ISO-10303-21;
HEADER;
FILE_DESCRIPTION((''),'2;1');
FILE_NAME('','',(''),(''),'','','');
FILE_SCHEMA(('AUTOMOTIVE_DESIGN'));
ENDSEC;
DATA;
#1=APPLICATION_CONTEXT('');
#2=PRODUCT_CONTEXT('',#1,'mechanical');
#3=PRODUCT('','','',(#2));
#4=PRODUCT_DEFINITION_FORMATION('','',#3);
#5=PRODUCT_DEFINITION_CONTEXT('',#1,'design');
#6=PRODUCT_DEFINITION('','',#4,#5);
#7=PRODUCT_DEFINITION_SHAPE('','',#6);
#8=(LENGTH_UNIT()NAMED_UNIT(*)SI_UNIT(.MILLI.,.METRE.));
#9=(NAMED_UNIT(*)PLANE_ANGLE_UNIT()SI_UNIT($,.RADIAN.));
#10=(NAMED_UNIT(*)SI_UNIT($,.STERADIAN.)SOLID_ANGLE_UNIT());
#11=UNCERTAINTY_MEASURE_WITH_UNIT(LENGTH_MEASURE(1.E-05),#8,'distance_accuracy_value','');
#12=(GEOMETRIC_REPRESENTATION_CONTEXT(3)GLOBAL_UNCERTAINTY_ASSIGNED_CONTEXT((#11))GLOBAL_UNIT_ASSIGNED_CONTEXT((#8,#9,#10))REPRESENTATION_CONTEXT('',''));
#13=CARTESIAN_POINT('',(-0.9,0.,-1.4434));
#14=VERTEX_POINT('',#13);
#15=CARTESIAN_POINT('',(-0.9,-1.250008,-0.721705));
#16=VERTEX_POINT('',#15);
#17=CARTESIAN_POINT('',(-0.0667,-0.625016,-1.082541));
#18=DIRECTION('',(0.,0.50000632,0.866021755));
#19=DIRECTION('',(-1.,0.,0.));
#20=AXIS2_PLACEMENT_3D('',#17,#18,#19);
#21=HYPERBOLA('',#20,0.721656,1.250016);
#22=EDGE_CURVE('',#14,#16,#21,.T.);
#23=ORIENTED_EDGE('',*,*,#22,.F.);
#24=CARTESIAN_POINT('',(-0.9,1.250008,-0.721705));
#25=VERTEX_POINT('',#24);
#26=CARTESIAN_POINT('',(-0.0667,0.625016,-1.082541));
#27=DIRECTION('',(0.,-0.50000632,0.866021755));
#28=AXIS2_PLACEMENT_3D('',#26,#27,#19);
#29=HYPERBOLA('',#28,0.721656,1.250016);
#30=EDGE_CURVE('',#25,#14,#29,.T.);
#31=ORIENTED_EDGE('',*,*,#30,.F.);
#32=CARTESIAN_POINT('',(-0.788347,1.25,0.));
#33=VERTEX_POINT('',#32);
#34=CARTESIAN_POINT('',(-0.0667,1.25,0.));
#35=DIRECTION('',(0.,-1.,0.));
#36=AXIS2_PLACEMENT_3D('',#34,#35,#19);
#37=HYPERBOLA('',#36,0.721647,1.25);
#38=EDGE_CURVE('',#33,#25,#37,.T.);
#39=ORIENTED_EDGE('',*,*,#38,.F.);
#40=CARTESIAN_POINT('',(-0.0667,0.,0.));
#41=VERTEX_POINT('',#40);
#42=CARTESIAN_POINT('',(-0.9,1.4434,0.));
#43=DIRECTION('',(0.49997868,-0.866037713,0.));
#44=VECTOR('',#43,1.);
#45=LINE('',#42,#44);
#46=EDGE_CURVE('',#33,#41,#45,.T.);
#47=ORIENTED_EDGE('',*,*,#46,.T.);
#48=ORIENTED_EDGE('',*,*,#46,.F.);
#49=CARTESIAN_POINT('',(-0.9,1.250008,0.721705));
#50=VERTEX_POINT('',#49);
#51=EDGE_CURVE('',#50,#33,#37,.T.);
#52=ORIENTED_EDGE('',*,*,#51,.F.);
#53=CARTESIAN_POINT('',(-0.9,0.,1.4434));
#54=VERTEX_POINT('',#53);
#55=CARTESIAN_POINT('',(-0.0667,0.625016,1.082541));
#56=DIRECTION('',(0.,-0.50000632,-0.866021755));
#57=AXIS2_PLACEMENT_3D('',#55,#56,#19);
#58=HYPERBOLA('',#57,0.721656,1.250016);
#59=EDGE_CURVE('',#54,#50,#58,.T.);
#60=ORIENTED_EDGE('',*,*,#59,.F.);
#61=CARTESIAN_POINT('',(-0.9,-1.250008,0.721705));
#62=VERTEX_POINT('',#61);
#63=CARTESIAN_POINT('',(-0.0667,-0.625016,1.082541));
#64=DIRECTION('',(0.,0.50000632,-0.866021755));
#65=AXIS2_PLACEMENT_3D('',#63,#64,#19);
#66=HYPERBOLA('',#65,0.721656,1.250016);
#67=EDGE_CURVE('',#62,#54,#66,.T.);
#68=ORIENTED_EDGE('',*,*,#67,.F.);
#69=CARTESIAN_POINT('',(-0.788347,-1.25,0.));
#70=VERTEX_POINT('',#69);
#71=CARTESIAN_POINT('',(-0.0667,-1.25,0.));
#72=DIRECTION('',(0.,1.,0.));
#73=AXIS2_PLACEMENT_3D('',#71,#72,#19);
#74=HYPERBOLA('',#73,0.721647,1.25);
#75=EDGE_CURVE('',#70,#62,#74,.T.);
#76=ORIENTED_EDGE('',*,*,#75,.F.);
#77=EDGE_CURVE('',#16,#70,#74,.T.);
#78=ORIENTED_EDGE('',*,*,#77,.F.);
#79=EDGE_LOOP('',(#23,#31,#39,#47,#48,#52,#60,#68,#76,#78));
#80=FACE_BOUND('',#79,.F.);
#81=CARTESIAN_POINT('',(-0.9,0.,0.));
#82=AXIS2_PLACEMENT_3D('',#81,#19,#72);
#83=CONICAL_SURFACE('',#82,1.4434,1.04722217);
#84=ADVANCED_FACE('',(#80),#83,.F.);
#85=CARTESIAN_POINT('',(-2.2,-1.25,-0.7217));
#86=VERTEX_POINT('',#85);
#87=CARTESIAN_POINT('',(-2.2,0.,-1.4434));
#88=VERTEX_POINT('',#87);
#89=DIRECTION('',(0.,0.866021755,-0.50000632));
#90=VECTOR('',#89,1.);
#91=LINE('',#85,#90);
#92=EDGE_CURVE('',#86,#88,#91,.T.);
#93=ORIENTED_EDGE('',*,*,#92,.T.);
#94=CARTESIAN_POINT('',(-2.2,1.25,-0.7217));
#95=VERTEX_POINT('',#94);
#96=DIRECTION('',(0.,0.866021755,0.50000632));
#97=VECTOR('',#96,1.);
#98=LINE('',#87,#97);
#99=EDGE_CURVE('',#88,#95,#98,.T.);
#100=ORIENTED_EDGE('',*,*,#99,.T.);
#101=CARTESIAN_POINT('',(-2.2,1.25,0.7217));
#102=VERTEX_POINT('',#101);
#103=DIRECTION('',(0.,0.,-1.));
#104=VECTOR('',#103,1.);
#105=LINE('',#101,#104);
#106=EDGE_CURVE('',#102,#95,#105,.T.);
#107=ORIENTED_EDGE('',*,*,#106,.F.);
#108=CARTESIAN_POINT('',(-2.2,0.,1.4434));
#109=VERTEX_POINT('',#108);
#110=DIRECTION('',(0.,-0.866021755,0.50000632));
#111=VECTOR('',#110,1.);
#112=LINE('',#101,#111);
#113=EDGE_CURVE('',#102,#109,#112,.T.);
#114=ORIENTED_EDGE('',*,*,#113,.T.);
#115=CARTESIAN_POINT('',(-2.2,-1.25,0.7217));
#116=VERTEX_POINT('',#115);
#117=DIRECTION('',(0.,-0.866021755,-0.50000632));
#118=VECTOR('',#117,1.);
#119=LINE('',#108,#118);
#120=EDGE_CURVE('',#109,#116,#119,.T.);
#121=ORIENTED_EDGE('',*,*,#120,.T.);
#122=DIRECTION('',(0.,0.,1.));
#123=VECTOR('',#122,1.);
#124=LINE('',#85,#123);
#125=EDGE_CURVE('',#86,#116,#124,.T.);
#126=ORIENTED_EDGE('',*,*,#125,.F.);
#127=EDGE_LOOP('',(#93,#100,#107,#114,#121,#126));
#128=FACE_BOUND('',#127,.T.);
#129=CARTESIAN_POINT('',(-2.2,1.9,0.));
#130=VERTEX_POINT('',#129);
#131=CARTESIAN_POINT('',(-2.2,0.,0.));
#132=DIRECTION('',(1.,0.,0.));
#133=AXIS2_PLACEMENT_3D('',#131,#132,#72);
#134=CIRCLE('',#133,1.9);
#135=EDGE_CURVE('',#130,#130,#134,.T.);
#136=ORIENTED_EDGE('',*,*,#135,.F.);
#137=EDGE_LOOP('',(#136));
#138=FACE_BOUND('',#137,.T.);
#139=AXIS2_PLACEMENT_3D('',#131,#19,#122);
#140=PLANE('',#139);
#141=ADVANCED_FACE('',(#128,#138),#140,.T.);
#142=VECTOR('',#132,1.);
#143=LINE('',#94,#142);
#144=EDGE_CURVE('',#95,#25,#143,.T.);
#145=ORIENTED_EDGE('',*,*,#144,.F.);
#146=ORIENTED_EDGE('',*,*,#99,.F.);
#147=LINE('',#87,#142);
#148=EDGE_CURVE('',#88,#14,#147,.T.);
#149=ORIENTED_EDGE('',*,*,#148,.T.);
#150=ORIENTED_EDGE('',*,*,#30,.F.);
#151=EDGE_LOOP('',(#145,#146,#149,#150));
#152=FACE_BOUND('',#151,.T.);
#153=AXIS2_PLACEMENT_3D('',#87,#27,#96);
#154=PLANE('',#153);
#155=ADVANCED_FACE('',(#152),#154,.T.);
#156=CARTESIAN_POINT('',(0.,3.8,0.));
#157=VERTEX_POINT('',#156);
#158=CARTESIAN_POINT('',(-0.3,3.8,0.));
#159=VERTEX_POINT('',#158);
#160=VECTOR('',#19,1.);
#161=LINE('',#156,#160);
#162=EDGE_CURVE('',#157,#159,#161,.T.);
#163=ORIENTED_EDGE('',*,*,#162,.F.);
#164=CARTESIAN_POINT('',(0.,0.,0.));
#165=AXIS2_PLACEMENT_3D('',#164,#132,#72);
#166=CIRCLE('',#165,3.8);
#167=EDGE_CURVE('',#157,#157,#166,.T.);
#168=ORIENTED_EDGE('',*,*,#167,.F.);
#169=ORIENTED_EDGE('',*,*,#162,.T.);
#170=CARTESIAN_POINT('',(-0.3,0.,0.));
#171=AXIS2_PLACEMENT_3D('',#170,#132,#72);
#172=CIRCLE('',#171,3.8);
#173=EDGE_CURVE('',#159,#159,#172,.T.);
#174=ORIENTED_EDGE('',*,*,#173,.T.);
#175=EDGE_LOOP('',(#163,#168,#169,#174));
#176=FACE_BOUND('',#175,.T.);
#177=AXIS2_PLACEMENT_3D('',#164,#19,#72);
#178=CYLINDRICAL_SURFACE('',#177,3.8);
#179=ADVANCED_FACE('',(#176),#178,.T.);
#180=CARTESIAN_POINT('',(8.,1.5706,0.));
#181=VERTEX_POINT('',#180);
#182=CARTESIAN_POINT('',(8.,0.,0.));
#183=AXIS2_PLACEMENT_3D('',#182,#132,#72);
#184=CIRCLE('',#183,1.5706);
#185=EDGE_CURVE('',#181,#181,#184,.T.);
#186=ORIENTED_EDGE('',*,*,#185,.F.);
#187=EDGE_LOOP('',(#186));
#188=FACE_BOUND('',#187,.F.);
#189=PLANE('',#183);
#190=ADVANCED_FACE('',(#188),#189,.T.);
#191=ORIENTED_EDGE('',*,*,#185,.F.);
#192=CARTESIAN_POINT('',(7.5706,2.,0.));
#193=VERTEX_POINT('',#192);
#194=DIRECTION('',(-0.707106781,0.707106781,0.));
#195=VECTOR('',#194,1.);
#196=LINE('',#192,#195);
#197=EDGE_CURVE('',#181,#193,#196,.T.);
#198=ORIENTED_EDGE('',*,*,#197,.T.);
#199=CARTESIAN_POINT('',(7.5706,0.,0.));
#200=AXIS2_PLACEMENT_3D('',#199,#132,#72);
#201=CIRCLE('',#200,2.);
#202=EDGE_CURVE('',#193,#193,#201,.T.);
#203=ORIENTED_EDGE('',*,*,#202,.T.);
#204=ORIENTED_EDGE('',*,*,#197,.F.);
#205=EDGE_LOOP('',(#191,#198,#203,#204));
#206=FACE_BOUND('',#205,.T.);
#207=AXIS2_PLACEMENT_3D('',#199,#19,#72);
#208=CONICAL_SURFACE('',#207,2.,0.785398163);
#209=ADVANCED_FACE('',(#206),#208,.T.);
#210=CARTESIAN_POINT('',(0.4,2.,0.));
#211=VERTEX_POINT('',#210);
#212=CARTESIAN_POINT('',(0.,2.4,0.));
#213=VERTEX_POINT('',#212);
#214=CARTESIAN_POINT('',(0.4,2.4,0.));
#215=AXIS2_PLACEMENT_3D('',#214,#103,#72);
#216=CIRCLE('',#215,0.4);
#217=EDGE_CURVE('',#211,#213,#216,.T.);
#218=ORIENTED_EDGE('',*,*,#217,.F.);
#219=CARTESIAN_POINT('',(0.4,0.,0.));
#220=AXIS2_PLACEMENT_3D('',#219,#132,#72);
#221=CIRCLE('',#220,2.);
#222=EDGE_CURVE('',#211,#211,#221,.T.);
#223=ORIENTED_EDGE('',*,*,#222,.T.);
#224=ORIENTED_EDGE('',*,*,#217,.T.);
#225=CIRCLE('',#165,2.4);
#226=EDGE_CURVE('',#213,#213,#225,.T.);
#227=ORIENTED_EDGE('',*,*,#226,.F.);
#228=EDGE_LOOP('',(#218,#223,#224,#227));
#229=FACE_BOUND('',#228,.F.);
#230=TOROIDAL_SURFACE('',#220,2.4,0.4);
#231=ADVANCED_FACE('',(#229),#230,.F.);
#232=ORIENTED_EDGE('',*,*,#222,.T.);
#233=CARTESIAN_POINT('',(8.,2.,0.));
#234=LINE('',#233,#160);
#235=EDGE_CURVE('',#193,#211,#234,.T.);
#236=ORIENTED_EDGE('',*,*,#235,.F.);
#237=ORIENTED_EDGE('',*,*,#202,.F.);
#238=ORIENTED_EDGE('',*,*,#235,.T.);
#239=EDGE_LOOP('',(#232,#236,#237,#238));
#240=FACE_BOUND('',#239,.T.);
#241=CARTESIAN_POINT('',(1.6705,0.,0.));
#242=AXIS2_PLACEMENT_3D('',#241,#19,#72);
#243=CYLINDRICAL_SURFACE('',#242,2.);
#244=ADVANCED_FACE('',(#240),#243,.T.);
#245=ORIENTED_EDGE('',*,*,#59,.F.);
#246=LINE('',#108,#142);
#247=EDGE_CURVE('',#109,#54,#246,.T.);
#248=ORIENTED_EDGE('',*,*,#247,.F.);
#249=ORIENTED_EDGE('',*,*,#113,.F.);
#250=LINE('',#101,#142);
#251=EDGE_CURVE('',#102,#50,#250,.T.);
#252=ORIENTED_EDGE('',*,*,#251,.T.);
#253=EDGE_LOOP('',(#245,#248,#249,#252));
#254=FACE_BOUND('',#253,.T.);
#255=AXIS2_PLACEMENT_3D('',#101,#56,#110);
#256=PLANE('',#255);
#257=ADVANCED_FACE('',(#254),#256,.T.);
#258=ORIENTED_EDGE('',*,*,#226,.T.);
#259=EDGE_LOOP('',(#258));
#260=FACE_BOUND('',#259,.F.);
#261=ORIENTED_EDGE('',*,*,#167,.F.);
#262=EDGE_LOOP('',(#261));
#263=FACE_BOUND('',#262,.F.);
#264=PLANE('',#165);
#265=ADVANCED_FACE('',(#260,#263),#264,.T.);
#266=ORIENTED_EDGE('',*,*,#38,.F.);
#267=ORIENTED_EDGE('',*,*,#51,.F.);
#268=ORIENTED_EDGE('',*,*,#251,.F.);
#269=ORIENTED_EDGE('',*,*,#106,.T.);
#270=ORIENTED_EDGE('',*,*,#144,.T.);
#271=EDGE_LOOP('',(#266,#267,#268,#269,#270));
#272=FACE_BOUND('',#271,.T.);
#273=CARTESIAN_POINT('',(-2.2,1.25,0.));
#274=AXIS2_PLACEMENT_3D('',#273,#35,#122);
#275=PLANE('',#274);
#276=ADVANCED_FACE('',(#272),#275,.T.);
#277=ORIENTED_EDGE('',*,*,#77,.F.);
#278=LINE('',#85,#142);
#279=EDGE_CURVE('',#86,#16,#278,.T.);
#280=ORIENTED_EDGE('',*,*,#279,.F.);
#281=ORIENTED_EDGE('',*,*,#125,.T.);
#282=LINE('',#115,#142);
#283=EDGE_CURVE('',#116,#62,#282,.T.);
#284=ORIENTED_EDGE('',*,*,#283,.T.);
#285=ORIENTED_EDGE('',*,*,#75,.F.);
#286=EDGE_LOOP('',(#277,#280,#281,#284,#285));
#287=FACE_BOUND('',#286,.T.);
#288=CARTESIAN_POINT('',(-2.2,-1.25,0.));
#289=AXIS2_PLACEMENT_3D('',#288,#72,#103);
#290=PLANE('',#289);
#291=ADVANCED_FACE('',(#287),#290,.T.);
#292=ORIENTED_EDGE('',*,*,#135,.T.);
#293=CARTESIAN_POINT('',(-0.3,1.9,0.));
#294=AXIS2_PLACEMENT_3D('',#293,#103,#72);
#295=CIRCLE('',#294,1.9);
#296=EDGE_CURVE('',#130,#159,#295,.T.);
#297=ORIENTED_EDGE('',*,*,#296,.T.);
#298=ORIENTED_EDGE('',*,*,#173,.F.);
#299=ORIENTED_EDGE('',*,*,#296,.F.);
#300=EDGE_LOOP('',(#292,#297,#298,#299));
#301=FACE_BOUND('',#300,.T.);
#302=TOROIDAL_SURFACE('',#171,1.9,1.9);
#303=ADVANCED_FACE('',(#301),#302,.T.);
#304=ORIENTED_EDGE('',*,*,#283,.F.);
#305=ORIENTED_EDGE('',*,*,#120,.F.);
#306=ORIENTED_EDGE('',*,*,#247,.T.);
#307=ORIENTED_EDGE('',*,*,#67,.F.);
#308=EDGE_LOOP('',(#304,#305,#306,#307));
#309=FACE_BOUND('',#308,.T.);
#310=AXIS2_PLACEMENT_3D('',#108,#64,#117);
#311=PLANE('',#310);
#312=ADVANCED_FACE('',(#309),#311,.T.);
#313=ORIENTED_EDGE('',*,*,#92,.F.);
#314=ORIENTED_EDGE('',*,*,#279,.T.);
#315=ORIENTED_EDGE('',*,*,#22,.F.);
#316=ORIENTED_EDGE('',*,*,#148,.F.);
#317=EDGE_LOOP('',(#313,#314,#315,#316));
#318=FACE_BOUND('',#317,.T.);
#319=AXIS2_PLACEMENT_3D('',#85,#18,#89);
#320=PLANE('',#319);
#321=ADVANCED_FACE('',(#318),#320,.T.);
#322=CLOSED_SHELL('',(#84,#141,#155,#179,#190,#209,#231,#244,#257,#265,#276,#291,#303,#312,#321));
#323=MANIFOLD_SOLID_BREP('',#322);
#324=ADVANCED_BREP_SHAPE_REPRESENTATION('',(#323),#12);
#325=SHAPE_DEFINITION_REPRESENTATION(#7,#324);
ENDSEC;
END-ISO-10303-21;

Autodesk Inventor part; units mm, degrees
ref_plane "YZ Plane" through (0, 0, 0) normal (1, 0, 0) x (0, 1, 0)
ref_plane "XZ Plane" through (0, 0, 0) normal (0, 1, 0) x (-1, 0, 0)
sketch "Sketch1" plane through (0, 0, 0) normal (0, 0, 1) x (1, 0, 0)
  line L0 (-0.0667, 0) -> (8, 0)
  line L1 (8, 0) -> (8, 2)
  line L2 (8, 2) -> (2.1, 2)
  line L3 (2.1, 2) -> (1.6705, 2)
  line L4 (1.6705, 2) -> (0, 2)
  line L5 (0, 2) -> (0, 3.8)
  line L6 (0, 3.8) -> (-2.2, 3.8)
  line L7 (-2.2, 3.8) -> (-2.2, 1.4434)
  line L8 (-2.2, 1.4434) -> (-0.9, 1.4434)
  line L9 (-0.9, 1.4434) -> (-0.0667, 0)
  line L10 (-4.24, 0) -> (10.04, 0) projected
  line L11 (0, -0.76) -> (0, 4.56) projected
  line L12 (2.1, 2) -> (0, 2) construction
  dimension "d1" = 5.9
  dimension "d2" = 0.4295
  dimension "d3" = 2.2
  dimension "d4" = 1.3
  dimension "d5" = 60
  dimension "d6" = 4
  dimension "d7" = 4
  dimension "d8" = 2.8868
  dimension "d9" = 7.6
  dimension "d26" = 8
revolve "Body" add sketch "Sketch1" angle 360 about axis through (-0.0667, 0, 0) along (1, 0, 0)
sketch "Sketch2" plane through (-2.2, 0, 0) normal (-1, 0, 0) x (0, 0, 1)
  circle A0 centre (0, 0) radius 1.4434 projected
  line L0 (0, -5.32) -> (0, 5.32) projected
  line L1 (-5.32, 0) -> (5.32, 0) projected
  line L2 (1.4434, 0) -> (0.7217, -1.25)
  line L3 (0.7217, -1.25) -> (-0.7217, -1.25)
  line L4 (-0.7217, -1.25) -> (-1.4434, 0)
  line L5 (-1.4434, 0) -> (-0.7217, 1.25)
  line L6 (-0.7217, 1.25) -> (0.7217, 1.25)
  line L7 (0.7217, 1.25) -> (1.4434, 0)
  point P0 (0, 0)
extrude "Slot" add sketch "Sketch2" against normal up to next contours L7 A0 | A0 L2 | L6 L0 A0 | A0 L0 L3 | L0 L6 A0 | A0 L3 L0 | L4 A0 | A0 L5
fillet "Fillet1" radius 1.9 1 edges at (-2.2, -3.8, 0)
thread "Thread" size "M4x0.7" class "6g" standard "ISO Metric profile" length 5.9
chamfer "Chamfer1" distance 0.4294 distance2 0.4294 1 edges at (8, -2, 0) measured on face at (8, 0.556, 0.0273)
ref_plane "Work Plane1" through (29, 0, 0) normal (0, -1, 0) x (1, 0, 0)
fillet "Fillet2" radius 0.4 1 edges at (0, -2, 0)
equation "\"d30\" = R"
equation "\"d17\" = RR"
equation "\"d13\" = GEL"
equation "\"d15\" = -0.5 * SPD + 0.5 * GD"
equation "\"d16\" = GUL"
equation "\"d1\" = GEL"
equation "\"d3\" = KOH"
equation "\"d4\" = INTI"
equation "\"d6\" = GD"
equation "\"d7\" = BDM"
equation "\"d8\" = 1.1547 * SW"
equation "\"d9\" = KOD"
equation "\"d26\" = NLG"
equation "\"GD\" = NND"
equation "\"NLG\" = 8"
equation "\"GEL\" = 5.9"
equation "\"KOD\" = 7.6"
equation "\"KOH\" = 2.2"
equation "\"INTI\" = 1.3"
equation "\"GAL\" = 0.61345 * PTC"
equation "\"GUL\" = 0.61345 * PTC"
equation "\"BDM\" = NND"
equation "\"SW\" = 2.5"
equation "\"RR\" = 1.9"
equation "\"SPD\" = NND - 1.2269 * PTC"
equation "\"R\" = 0.4"
equation "\"TOA\" = 30deg"
equation "\"GD1\" = THREADDIA - 1.2269 * PTC"
equation "\"THREADDIA\" = 4"
equation "\"PTC\" = 0.7"
equation "\"NND\" = 4"
equation "\"KOH1\" = 0.3"
equation "\"E0\" = 2.873"
properties part number "ISO 7380-1 - M4 x 8" material "Steel"
